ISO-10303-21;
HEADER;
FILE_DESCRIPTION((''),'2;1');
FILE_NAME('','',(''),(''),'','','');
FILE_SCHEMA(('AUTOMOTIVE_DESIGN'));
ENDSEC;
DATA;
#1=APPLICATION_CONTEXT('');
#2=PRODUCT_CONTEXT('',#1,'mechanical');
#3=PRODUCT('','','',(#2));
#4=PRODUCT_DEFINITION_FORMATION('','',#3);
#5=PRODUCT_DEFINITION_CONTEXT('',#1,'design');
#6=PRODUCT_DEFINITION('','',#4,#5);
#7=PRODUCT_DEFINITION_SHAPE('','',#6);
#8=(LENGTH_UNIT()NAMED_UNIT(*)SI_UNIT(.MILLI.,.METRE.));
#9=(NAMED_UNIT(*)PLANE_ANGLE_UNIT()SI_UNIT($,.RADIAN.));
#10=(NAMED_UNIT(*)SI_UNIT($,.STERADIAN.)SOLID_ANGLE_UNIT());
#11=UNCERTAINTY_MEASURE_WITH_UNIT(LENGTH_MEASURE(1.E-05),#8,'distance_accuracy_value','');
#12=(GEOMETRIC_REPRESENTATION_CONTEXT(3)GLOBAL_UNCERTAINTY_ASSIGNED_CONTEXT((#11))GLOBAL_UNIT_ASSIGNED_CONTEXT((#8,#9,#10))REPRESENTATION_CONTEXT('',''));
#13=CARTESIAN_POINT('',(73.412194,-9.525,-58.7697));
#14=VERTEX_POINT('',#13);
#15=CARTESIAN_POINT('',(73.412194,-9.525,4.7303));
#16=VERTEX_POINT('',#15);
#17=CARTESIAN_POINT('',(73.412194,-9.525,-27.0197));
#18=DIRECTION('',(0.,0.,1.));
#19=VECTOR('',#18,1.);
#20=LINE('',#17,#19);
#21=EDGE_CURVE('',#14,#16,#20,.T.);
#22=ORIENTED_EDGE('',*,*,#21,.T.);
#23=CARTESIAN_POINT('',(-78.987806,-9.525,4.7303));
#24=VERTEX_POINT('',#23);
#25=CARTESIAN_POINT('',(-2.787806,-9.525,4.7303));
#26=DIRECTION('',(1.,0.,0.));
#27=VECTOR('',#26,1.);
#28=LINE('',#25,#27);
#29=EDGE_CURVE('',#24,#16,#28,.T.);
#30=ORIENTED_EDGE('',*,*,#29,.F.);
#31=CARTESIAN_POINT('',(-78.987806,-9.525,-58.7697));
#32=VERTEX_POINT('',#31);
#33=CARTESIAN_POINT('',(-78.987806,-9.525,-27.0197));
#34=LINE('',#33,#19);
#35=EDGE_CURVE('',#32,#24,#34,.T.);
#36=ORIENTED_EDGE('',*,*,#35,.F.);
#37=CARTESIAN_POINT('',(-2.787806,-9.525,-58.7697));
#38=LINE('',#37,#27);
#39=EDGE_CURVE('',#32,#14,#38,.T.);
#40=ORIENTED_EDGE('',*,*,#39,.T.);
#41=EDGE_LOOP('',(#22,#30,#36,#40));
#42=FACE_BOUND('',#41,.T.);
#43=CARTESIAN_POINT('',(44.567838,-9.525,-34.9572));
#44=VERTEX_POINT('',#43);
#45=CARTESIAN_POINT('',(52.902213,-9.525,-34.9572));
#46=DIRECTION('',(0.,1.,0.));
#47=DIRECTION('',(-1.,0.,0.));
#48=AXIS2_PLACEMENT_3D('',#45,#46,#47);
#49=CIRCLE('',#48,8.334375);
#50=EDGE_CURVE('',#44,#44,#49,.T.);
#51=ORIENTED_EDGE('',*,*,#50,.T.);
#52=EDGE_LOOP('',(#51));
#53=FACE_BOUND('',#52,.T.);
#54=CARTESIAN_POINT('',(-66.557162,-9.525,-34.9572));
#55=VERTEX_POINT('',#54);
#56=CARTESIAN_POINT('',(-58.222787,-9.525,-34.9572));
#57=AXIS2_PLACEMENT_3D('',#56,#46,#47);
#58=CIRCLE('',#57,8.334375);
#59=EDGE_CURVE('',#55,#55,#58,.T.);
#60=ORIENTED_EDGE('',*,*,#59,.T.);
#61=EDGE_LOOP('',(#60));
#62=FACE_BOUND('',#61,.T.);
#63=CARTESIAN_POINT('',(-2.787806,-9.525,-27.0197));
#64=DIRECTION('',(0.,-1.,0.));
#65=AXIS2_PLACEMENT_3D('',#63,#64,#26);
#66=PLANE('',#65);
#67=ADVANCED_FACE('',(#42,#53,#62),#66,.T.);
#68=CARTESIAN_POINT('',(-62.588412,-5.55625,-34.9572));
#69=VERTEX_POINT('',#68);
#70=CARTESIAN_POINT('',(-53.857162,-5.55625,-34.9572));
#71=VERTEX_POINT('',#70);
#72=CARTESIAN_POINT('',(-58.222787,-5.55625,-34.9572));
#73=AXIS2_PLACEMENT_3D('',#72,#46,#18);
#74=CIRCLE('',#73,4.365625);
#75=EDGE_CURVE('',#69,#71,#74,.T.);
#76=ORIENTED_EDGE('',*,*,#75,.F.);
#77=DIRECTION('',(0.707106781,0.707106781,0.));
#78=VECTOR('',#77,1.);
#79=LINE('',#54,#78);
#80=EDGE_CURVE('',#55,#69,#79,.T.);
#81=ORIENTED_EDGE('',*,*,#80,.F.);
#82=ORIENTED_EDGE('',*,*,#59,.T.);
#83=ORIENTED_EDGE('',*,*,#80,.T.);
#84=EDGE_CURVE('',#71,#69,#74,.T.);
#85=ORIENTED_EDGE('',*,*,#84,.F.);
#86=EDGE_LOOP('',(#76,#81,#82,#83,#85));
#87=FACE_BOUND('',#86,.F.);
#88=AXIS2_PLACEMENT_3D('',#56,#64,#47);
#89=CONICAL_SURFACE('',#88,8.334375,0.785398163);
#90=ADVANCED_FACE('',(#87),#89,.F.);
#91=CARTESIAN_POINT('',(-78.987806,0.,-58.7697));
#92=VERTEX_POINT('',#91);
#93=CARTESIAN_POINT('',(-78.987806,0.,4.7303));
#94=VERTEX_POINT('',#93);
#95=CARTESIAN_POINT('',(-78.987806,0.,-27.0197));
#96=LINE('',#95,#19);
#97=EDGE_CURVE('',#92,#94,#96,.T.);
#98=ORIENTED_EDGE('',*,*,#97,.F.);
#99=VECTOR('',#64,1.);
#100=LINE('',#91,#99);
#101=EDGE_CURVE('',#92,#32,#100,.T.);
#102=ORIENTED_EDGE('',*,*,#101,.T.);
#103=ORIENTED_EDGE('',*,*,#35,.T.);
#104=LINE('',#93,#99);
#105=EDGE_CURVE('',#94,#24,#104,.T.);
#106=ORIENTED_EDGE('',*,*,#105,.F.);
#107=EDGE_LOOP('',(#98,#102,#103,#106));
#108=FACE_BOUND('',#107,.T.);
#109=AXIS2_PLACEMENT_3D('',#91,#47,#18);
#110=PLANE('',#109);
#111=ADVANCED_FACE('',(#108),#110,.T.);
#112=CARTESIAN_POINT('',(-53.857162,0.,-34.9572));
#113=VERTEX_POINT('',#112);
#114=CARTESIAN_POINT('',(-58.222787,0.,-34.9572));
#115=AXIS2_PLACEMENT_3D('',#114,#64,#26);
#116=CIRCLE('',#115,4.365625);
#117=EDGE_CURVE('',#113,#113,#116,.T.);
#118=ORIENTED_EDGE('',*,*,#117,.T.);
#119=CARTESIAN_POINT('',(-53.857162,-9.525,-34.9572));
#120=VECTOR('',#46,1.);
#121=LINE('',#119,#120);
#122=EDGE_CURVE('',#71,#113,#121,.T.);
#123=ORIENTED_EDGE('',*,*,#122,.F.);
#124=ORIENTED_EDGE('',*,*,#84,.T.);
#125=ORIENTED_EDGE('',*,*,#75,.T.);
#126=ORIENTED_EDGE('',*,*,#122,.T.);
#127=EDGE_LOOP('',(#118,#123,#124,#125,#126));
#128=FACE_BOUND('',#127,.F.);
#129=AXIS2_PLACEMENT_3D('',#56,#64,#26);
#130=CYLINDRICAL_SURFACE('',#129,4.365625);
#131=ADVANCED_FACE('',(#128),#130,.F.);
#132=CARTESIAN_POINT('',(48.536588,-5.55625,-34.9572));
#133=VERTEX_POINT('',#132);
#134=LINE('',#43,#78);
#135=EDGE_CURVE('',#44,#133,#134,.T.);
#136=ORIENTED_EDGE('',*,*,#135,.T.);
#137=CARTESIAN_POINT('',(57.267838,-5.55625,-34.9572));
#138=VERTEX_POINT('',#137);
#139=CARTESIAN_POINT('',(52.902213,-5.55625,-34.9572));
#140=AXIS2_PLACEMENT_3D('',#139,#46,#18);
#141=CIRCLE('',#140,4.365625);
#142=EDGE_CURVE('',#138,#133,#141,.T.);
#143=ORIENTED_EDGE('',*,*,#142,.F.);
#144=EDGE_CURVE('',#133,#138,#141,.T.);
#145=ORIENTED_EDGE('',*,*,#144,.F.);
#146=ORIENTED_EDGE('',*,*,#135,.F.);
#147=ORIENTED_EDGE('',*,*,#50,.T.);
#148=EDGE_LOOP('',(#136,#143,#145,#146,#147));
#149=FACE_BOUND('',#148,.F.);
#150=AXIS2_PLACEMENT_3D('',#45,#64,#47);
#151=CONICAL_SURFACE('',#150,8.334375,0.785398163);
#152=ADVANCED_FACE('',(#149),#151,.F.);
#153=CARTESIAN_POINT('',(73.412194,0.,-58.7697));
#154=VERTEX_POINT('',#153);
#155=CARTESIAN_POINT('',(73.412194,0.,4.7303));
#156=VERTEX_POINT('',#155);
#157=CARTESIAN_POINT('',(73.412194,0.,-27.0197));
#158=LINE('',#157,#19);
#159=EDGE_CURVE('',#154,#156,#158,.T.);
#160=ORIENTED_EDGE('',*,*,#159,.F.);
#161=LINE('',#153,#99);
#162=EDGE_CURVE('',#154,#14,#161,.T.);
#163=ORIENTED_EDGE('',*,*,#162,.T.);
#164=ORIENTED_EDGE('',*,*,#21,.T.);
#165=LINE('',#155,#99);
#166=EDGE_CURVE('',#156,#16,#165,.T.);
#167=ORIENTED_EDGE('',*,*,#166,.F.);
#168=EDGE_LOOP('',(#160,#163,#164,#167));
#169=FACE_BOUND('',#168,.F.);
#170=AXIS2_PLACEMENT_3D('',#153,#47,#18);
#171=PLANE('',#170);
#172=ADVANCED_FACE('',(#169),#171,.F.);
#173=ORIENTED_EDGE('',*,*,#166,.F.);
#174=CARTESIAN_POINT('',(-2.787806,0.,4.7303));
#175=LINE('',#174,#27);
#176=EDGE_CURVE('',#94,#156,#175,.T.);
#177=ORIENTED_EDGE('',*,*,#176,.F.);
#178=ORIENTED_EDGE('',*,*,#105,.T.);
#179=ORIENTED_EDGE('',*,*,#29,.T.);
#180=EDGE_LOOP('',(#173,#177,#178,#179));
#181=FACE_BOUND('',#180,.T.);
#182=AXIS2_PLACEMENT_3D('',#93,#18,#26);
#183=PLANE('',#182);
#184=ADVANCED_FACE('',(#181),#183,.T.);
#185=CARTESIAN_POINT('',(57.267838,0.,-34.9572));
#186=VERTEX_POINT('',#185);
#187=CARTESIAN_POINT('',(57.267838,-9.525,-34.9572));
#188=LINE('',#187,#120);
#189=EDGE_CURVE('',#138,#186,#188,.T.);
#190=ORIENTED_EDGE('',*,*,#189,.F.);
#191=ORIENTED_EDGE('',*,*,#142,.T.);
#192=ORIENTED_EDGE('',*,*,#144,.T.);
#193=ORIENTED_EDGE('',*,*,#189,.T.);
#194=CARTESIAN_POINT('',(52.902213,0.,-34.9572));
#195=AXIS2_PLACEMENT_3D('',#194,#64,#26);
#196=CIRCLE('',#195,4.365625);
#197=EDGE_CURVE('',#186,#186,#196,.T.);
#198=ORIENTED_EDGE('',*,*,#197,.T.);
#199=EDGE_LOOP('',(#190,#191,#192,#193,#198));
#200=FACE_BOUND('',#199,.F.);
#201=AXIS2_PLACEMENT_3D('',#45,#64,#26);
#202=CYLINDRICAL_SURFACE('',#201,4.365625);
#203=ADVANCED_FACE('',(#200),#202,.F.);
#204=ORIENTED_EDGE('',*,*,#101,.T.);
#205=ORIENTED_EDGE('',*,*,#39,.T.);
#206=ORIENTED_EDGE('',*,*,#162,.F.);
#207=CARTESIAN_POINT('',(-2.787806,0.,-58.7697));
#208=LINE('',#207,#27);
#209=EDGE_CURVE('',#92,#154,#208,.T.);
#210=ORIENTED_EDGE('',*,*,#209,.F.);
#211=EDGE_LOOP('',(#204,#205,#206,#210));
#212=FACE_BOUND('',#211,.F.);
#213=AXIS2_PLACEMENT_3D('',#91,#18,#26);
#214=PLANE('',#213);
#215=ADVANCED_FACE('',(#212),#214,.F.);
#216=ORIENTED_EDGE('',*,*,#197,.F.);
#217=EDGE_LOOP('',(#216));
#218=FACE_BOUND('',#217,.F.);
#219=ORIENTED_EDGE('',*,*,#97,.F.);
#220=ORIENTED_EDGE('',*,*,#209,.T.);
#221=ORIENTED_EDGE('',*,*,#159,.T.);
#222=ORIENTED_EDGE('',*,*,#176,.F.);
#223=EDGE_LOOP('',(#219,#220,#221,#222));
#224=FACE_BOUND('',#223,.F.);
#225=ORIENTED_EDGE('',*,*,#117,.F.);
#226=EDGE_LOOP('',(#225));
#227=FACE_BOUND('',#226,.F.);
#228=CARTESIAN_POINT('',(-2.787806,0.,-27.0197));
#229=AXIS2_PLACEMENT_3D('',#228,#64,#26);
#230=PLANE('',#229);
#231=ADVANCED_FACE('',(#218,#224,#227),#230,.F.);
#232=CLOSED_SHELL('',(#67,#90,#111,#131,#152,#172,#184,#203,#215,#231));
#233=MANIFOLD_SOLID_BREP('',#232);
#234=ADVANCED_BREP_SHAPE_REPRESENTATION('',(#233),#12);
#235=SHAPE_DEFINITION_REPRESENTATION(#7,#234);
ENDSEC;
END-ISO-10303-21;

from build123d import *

# Parameters (mm, degrees)
F0_W           = 152.4
F0_H           = 63.5
F1_DEPTH       = 9.525
F2_R           = 4.365625
F3_DEPTH       = 25.4
F4_D           = 8.73125
F4_CSINK_D     = 16.66875
F4_CSINK_ANGLE = 90


# Not quite as in the source:
# - a length typed as a fraction of an inch, garbled in the dataset ("3 / 203.2 mm" for 3/8 in), is restored


with BuildPart() as f1:
    # F0 (on Front) → F1 (new body)
    with BuildSketch(Plane.XZ):
        with Locations((-2.7878060937, -27.0196995885)):
            Rectangle(F0_W, F0_H)
    extrude(amount=F1_DEPTH)

    # F2 (on face) → F3 (cut)
    with BuildSketch(Plane.XZ.offset(9.525)):
        with Locations((52.9022132752, -34.9571995885)):
            Circle(F2_R)
        with Locations((-58.2227867248, -34.9571995885)):
            Circle(F2_R)
    extrude(amount=-F3_DEPTH, mode=Mode.SUBTRACT)

    # F4 (through all)
    with Locations(Plane.XZ.offset(9.525)):
        with Locations((52.9022132752, -34.9571995885), (-58.2227867248, -34.9571995885)):
            CounterSinkHole(F4_D / 2, F4_CSINK_D / 2, counter_sink_angle=F4_CSINK_ANGLE)


solid = f1.part
